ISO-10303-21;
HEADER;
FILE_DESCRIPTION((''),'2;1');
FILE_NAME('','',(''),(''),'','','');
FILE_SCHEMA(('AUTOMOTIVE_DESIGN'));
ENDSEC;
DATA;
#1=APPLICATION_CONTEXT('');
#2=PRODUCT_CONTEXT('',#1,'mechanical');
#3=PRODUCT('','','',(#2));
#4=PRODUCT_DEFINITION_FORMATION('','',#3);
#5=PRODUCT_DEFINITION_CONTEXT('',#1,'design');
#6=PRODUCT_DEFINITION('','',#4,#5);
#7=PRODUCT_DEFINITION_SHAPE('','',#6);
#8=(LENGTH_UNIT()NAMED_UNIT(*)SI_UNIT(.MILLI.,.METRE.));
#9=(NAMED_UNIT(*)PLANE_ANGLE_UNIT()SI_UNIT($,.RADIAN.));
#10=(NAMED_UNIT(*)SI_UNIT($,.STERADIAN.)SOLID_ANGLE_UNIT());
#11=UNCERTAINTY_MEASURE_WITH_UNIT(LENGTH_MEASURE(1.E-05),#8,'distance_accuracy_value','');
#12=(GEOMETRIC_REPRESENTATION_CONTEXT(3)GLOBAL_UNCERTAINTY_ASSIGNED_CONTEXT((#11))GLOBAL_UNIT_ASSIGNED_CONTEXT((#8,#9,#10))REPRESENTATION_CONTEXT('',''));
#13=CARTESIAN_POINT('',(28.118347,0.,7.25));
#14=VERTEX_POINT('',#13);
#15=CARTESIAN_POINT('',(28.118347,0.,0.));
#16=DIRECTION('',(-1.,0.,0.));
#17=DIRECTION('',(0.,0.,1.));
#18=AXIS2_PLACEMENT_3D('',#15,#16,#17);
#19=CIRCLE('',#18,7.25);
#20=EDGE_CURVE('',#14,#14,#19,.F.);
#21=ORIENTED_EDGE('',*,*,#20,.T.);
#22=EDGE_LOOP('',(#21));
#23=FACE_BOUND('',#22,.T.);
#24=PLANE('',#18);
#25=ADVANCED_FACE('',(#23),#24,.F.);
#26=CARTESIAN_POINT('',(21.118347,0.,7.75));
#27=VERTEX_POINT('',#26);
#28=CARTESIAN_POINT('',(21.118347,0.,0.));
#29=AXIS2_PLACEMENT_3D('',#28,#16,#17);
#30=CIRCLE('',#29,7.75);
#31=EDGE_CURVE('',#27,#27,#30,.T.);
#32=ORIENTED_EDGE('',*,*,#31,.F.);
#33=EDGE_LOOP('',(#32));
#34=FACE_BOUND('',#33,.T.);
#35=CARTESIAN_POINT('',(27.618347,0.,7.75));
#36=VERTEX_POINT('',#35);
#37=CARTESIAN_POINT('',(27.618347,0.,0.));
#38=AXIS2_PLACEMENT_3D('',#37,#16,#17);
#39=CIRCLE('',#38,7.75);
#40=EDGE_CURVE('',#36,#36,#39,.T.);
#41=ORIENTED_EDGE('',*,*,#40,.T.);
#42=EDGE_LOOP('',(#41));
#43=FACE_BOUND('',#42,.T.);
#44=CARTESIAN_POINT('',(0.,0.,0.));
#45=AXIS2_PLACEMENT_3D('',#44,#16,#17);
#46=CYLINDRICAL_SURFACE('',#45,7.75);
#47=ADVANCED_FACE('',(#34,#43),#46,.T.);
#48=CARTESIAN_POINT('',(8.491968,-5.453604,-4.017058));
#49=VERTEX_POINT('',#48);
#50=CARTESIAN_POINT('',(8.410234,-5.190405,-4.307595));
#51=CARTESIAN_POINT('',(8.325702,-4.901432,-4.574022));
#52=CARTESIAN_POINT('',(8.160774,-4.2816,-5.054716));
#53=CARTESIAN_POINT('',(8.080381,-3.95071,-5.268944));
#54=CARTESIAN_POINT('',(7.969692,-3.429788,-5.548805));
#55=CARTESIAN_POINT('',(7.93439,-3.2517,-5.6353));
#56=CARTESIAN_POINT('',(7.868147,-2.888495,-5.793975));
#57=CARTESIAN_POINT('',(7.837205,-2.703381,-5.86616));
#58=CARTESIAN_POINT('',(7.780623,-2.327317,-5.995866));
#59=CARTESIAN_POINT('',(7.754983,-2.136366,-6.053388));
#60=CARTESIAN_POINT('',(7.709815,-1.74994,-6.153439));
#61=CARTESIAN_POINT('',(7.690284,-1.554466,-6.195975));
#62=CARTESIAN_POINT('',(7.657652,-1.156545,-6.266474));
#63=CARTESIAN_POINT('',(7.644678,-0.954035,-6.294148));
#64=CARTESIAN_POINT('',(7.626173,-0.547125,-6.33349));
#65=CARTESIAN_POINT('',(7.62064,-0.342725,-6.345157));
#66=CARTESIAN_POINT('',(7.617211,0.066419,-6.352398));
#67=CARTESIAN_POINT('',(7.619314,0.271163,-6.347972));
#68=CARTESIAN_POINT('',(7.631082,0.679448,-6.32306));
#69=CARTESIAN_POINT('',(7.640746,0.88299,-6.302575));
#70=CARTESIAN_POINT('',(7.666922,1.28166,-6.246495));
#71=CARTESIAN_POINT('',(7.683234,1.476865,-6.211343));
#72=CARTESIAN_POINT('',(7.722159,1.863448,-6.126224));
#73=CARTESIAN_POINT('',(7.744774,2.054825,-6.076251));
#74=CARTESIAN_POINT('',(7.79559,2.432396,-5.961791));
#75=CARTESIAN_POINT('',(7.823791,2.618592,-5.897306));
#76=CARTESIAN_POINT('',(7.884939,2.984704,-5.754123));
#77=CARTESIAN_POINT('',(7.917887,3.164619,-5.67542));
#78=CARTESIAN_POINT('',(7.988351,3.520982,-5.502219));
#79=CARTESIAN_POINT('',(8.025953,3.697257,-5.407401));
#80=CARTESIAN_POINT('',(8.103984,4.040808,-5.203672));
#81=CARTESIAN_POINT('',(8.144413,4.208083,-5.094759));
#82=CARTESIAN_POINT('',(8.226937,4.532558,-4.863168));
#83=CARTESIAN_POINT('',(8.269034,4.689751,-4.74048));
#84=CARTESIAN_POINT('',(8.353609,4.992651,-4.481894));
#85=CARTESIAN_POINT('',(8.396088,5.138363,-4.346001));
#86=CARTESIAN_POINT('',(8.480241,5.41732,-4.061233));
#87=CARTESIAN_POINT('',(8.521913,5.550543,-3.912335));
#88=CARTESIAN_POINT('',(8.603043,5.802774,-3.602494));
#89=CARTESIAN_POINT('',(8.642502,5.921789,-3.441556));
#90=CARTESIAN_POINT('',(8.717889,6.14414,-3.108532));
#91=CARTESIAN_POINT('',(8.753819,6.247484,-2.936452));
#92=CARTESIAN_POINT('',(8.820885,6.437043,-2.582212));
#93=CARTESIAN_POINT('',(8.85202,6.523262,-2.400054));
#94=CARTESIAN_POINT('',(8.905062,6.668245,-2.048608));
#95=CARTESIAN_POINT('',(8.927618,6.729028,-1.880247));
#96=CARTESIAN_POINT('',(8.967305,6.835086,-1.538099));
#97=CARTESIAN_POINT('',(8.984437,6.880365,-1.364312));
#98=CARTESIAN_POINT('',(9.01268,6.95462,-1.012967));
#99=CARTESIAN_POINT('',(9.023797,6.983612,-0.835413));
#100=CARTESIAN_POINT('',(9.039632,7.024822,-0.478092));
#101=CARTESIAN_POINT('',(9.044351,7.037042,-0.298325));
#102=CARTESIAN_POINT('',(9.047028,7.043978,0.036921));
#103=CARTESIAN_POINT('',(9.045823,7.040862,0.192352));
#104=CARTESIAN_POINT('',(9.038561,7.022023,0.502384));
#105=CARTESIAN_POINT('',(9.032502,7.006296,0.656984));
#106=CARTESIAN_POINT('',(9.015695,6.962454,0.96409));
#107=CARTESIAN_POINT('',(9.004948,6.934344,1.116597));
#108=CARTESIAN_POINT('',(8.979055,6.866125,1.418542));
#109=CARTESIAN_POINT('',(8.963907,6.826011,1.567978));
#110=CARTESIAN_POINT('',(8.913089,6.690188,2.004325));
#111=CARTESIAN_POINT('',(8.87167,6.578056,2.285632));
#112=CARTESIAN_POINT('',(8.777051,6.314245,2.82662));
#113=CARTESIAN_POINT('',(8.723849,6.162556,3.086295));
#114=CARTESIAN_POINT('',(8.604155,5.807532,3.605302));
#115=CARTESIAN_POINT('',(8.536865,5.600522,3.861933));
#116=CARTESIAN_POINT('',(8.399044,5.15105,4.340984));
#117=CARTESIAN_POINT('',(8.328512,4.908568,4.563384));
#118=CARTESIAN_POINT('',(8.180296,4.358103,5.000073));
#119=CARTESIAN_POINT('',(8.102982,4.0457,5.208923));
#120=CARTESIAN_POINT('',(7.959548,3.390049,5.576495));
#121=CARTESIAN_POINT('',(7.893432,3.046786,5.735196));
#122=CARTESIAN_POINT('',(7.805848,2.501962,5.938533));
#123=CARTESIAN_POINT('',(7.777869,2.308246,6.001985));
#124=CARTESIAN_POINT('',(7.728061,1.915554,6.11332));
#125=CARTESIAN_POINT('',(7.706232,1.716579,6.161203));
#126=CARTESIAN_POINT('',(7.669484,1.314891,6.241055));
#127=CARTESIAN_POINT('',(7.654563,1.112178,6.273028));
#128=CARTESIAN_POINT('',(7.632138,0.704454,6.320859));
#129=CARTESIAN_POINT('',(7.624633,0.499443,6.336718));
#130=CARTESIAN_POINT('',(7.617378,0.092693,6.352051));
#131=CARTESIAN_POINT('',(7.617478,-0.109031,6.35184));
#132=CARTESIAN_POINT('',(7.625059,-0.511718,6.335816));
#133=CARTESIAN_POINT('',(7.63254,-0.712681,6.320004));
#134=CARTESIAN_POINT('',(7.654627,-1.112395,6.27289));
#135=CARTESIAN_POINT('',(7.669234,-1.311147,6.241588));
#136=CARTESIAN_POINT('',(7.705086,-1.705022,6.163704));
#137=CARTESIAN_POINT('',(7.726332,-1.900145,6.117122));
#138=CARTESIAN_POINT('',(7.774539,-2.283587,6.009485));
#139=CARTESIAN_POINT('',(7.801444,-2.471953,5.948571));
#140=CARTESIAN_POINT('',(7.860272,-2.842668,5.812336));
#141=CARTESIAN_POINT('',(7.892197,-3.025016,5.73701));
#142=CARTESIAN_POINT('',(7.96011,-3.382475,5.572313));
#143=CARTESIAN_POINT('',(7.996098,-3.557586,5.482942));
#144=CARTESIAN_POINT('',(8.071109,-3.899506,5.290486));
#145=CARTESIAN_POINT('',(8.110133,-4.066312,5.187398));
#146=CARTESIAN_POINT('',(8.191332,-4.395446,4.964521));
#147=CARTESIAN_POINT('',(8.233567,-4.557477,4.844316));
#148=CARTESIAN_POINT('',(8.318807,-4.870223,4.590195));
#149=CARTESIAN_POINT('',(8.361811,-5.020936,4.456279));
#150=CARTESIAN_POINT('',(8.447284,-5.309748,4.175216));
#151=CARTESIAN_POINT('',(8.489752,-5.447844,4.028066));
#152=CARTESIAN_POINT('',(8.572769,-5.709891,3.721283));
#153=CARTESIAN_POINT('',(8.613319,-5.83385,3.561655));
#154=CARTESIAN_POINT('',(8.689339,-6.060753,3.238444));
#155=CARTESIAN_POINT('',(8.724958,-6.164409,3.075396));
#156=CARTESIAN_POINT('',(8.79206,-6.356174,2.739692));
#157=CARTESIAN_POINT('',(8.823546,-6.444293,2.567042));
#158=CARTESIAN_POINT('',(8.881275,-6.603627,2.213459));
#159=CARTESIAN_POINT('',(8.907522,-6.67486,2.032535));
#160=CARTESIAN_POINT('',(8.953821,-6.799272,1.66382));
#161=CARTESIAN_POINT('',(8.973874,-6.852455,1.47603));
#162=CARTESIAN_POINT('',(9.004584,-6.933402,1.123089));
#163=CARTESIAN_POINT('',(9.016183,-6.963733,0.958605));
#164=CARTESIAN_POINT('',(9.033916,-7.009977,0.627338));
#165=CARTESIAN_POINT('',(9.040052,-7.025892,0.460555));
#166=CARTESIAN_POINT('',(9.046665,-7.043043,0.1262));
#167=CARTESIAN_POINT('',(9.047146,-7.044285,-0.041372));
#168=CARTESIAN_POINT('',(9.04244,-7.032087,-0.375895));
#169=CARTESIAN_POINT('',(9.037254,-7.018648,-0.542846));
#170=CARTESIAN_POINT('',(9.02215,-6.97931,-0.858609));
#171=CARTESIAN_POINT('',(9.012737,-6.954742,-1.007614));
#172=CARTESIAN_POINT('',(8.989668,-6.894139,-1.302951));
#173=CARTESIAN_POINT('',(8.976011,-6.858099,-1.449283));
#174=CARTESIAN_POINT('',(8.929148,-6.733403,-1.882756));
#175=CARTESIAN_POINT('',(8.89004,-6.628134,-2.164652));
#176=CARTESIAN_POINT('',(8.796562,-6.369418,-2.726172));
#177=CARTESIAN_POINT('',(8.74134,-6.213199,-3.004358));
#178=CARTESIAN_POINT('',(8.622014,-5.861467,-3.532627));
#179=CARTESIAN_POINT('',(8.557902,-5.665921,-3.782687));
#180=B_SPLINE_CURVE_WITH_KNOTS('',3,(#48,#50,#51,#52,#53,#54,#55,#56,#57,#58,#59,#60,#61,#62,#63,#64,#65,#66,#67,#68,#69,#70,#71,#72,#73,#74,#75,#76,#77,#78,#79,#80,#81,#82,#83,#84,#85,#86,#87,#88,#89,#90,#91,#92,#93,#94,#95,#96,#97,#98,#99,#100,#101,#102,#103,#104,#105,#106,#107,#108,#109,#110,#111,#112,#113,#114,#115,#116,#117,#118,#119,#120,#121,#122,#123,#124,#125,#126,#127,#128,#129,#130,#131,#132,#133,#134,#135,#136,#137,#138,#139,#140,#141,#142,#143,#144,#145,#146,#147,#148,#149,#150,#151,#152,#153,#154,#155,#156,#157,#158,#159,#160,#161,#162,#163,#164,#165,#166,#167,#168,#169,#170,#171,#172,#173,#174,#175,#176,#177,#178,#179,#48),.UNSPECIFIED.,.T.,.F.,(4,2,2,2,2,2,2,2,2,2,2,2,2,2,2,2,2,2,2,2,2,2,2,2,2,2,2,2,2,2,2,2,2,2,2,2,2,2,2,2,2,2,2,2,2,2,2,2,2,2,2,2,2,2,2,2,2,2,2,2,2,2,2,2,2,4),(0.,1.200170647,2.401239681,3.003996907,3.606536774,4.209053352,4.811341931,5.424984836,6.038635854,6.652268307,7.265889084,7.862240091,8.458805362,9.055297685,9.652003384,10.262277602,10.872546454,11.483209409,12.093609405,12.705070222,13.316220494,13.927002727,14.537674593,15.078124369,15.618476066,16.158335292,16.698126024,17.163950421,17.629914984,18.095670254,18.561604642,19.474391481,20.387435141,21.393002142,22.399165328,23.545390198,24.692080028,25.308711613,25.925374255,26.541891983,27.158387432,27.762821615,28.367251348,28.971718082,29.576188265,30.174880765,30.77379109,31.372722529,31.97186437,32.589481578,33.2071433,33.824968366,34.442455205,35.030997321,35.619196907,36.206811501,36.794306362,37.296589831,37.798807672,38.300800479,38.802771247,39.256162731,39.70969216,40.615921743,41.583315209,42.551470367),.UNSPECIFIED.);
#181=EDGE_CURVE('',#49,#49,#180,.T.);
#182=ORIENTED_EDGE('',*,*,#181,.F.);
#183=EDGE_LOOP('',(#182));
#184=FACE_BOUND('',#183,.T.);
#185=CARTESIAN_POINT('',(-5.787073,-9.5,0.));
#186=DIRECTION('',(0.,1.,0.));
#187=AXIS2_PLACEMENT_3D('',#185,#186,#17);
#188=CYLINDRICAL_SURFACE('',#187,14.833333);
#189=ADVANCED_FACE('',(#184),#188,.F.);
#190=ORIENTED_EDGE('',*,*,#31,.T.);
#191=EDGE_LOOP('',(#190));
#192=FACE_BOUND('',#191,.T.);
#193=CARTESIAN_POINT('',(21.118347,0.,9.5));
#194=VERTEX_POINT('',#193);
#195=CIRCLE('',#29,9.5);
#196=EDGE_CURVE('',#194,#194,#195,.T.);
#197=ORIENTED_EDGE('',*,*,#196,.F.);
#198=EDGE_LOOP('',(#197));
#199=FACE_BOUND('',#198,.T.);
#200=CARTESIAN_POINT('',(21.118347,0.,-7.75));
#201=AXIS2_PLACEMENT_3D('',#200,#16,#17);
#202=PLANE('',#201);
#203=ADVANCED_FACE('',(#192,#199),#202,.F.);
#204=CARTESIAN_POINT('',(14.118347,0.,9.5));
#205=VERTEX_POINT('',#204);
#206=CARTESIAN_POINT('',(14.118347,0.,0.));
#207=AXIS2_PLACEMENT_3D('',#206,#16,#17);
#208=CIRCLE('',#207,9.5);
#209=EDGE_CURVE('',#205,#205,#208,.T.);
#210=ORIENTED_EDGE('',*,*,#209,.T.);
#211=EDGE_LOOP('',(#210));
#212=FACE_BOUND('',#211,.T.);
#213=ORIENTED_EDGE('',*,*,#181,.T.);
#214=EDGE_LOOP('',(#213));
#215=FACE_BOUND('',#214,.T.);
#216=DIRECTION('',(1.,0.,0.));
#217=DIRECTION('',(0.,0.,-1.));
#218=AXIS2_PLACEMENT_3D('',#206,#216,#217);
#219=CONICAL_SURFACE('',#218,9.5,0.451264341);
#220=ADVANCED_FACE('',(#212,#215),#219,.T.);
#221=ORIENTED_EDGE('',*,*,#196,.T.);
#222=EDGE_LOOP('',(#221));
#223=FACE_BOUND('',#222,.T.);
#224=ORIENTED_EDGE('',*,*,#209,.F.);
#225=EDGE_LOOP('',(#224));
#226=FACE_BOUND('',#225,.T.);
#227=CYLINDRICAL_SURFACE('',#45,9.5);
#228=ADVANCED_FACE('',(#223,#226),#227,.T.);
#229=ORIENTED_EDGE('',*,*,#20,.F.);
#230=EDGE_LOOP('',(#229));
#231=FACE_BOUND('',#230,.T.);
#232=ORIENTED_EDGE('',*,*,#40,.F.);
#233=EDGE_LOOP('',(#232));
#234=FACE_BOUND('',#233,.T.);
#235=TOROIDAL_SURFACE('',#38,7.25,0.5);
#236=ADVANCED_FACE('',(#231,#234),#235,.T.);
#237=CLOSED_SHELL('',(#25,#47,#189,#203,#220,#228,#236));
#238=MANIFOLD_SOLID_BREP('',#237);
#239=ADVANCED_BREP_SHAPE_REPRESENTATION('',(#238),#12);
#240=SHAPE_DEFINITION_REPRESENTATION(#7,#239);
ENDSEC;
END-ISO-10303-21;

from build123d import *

# Parameters (mm, degrees)
CUT_EXTRUDE1_DEPTH      = 32.163141952
CUT_EXTRUDE1_DEPTH_BACK = 32.163141952
FILLET1_R               = 0.5


# Read off the part's stored shape, not the designer's step: Revolve2
with BuildPart() as part:
    # Revolve2 outline → Revolve2 (revolve)
    with BuildSketch(Plane.YX):
        Polygon((7.75, 28.118346614), (0, 28.118346614), (0, 7.618346614), (6.35, 7.618346614), (9.5, 14.118346614), (9.5, 21.118346614), (7.75, 21.118346614), align=None)
    revolve(axis=Axis((0, 0, 0), (1, 0, 0)))

    # Sketch3 → Cut-Extrude1 (cut, two sides: drawn at the far end of the back side and taken through both)
    with BuildSketch(Plane(origin=(0, 0, 0), x_dir=(1, 0, 0), z_dir=(0, 1, 0)).offset(-CUT_EXTRUDE1_DEPTH_BACK)):
        with BuildLine():
            Line((7.618346614, 6.35), (7.618346614, -6.35))
            ThreePointArc((7.618346614, -6.35), (9.046260231, 0), (7.618346614, 6.35))
        make_face()
    extrude(amount=CUT_EXTRUDE1_DEPTH + CUT_EXTRUDE1_DEPTH_BACK, mode=Mode.SUBTRACT)

    # Fillet1
    fillet1_edges = [part.edges().sort_by_distance(p)[0] for p in [
        (28.118346614, -7.75, 0),
    ]]
    fillet(fillet1_edges, radius=FILLET1_R)


solid = part.part
